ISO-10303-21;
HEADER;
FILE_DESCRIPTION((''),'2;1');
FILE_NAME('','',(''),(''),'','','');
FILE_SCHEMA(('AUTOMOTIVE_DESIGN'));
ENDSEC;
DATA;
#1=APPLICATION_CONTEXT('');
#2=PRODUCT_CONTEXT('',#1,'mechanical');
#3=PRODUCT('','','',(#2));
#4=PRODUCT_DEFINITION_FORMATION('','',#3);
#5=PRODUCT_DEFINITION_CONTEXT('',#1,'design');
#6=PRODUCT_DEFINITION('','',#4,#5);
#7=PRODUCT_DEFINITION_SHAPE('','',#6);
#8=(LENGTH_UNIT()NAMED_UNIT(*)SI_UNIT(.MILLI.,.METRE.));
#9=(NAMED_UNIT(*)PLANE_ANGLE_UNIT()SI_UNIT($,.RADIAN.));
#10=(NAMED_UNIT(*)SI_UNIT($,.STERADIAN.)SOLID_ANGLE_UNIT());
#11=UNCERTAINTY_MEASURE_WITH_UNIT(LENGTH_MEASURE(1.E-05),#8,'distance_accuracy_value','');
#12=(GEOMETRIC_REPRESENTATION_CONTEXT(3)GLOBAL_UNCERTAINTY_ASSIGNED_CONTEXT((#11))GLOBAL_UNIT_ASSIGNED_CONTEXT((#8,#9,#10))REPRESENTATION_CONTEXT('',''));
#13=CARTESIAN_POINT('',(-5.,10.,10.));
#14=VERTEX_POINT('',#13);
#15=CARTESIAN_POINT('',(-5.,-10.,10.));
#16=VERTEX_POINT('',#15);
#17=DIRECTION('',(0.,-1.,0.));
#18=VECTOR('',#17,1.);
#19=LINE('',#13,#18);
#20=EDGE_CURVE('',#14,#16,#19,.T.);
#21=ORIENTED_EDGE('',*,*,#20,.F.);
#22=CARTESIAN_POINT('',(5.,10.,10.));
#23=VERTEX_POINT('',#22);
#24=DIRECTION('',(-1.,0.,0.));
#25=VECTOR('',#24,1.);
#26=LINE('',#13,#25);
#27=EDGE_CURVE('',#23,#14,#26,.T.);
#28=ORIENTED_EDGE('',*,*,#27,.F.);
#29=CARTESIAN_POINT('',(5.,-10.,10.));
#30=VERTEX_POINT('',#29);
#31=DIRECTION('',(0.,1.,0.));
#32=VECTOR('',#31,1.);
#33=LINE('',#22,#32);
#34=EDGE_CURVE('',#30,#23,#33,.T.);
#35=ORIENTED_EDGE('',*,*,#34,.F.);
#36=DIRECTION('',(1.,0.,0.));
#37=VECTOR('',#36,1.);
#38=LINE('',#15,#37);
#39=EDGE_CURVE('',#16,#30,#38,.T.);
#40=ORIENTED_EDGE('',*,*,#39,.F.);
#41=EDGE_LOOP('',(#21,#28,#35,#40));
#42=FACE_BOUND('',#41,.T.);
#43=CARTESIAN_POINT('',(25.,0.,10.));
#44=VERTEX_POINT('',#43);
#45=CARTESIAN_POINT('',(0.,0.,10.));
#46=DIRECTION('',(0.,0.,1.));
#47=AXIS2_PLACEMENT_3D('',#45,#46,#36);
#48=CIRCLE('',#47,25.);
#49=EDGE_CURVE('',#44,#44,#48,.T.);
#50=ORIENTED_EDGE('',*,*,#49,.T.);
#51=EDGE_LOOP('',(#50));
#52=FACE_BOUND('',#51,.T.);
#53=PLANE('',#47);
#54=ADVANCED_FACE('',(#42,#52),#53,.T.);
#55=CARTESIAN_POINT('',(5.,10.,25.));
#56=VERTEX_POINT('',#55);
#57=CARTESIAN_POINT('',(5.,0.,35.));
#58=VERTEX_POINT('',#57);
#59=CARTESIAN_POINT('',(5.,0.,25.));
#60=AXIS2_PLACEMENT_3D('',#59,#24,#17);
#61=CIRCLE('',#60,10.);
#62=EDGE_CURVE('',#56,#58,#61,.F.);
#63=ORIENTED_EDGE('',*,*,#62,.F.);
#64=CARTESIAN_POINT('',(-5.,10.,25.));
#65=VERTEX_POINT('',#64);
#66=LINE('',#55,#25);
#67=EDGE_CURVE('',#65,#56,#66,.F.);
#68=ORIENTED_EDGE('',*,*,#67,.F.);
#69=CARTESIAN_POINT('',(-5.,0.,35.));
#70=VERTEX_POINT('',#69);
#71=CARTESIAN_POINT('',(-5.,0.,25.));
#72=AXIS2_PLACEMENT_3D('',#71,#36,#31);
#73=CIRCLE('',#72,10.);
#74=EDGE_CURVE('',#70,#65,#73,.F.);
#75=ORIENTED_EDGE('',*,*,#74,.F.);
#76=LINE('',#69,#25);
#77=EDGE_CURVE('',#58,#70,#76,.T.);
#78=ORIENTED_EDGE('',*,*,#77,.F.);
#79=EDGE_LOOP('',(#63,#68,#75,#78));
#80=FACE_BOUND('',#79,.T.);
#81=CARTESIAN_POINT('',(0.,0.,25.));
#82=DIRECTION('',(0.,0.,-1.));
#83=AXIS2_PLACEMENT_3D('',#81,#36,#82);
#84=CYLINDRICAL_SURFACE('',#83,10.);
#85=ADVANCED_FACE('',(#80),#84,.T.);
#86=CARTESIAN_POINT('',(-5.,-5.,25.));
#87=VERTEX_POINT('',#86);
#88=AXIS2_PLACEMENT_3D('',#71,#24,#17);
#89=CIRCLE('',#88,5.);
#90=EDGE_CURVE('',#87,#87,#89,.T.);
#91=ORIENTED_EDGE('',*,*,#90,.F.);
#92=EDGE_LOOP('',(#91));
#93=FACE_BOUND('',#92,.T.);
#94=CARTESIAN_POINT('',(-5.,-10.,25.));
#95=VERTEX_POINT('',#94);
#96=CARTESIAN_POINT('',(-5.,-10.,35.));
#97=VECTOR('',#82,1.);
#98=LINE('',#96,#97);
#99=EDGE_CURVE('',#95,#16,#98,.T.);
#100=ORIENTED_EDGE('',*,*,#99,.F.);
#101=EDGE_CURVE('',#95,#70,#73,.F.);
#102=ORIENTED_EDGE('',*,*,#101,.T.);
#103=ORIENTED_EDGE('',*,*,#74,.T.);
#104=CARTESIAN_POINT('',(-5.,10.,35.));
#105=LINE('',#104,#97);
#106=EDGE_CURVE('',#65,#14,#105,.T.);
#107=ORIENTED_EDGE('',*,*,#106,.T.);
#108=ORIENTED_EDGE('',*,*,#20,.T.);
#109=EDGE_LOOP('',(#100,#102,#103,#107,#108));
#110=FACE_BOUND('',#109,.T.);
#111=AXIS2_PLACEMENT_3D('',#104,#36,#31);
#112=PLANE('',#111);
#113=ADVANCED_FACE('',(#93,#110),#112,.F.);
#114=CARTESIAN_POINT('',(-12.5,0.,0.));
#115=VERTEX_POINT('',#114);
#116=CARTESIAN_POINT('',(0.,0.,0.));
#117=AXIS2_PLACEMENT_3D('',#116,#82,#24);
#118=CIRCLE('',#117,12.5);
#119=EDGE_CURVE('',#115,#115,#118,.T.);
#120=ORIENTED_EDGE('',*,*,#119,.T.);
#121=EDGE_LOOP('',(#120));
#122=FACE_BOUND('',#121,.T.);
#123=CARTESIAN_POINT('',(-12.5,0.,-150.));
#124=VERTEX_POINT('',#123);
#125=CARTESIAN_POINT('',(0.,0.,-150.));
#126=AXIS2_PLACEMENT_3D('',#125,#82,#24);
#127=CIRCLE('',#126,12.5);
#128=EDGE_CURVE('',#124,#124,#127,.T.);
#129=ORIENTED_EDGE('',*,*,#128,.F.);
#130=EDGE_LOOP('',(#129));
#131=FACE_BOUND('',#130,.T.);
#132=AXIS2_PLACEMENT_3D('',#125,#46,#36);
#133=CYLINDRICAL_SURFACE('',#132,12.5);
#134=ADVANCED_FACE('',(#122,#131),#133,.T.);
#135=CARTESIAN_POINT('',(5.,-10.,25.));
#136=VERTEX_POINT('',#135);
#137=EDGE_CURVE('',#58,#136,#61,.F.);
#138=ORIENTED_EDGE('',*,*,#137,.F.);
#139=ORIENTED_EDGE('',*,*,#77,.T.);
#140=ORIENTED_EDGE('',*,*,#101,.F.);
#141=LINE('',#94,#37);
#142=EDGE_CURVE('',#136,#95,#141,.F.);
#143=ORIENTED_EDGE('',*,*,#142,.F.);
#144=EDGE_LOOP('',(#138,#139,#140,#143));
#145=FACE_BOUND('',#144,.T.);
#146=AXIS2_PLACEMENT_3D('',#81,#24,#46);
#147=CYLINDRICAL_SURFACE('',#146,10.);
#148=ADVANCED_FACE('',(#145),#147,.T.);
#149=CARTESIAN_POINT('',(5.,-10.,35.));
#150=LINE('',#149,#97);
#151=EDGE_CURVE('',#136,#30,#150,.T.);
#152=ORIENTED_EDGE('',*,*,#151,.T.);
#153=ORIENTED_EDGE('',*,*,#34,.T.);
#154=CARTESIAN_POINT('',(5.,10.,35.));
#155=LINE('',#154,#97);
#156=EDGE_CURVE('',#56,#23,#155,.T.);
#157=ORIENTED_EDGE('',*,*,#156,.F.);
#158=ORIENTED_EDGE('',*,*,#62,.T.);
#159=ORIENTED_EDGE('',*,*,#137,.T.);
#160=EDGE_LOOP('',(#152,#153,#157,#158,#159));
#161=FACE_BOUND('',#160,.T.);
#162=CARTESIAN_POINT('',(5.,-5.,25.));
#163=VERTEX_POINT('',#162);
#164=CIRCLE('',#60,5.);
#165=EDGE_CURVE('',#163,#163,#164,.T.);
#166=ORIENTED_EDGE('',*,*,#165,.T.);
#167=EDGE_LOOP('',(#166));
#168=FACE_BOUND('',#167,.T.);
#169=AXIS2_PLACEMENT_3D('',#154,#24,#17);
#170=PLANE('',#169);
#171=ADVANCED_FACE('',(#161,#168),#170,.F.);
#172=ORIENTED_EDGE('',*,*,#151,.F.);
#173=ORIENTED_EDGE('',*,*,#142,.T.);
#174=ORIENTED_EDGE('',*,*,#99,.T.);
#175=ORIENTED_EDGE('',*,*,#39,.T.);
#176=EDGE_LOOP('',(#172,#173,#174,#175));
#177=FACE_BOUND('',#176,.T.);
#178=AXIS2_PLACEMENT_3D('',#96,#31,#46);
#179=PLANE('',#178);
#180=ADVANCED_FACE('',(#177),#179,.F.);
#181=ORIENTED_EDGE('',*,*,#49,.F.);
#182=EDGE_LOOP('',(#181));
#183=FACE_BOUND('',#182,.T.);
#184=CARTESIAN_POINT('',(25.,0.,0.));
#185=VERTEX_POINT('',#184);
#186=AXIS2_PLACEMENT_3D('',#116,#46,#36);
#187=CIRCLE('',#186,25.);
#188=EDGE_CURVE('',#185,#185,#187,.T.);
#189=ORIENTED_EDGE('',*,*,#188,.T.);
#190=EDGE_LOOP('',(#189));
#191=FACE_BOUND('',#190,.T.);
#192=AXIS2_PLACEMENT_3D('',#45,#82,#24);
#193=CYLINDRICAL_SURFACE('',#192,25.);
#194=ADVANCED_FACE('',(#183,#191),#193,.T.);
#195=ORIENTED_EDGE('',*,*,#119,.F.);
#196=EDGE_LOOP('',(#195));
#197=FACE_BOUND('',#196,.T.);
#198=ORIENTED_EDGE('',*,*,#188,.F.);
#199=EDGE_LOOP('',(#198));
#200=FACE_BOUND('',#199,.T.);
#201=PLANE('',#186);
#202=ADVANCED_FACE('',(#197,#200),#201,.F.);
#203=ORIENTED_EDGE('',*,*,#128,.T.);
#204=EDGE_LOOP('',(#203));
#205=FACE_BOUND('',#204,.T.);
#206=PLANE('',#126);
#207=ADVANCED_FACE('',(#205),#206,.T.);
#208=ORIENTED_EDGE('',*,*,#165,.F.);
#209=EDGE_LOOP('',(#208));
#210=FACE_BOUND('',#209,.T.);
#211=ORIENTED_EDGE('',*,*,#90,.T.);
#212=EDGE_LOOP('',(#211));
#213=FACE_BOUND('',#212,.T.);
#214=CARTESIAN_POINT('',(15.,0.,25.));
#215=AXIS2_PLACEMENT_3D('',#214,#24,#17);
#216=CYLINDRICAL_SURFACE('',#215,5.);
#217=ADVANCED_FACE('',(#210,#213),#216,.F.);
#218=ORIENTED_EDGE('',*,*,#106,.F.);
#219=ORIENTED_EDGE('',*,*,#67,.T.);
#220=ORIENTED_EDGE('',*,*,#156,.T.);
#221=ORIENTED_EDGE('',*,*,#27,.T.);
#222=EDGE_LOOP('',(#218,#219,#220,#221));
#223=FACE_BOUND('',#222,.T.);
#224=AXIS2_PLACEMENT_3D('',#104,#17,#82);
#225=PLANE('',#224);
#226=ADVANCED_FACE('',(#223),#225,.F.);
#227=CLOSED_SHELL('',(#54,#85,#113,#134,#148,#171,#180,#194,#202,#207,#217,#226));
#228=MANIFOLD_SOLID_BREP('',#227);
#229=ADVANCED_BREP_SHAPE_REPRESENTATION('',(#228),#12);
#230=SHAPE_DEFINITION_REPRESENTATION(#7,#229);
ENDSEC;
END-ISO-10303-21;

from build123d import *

# Parameters (mm, degrees)
SKETCH2_R           = 25
BOSS_EXTRUDE2_DEPTH = 10
SKETCH3_W           = 10
SKETCH3_H           = 20
BOSS_EXTRUDE3_DEPTH = 25
SKETCH4_R           = 5
CUT_EXTRUDE1_DEPTH  = 20
FILLET1_R           = 10
SKETCH5_R           = 12.5
BOSS_EXTRUDE4_DEPTH = 150


with BuildPart() as part:
    # Sketch2 → Boss-Extrude2 (new body)
    with BuildSketch(Plane.XY):
        Circle(SKETCH2_R)
    extrude(amount=BOSS_EXTRUDE2_DEPTH)

    # Sketch3 → Boss-Extrude3 (add)
    with BuildSketch(Plane.XY.offset(10)):
        Rectangle(SKETCH3_W, SKETCH3_H)
    extrude(amount=BOSS_EXTRUDE3_DEPTH)

    # Sketch4 → Cut-Extrude1 (cut)
    with BuildSketch(Plane.ZY.offset(5)):
        with Locations(Location((25, 0, 0), (0, 0, 270))):
            Circle(SKETCH4_R)
    extrude(amount=-CUT_EXTRUDE1_DEPTH, mode=Mode.SUBTRACT)

    # Fillet1
    fillet1_edges = [part.edges().sort_by_distance(p)[0] for p in [
        (0, -10, 35),
        (0, 10, 35),
    ]]
    fillet(fillet1_edges, radius=FILLET1_R - 0.0001)  # a hair under: the kernel refuses the full size

    # Sketch5 → Boss-Extrude4 (add)
    with BuildSketch(Plane(origin=(0, 0, 0), x_dir=(-1, 0, 0), z_dir=(0, 0, -1))):
        Circle(SKETCH5_R)
    extrude(amount=BOSS_EXTRUDE4_DEPTH)


solid = part.part
